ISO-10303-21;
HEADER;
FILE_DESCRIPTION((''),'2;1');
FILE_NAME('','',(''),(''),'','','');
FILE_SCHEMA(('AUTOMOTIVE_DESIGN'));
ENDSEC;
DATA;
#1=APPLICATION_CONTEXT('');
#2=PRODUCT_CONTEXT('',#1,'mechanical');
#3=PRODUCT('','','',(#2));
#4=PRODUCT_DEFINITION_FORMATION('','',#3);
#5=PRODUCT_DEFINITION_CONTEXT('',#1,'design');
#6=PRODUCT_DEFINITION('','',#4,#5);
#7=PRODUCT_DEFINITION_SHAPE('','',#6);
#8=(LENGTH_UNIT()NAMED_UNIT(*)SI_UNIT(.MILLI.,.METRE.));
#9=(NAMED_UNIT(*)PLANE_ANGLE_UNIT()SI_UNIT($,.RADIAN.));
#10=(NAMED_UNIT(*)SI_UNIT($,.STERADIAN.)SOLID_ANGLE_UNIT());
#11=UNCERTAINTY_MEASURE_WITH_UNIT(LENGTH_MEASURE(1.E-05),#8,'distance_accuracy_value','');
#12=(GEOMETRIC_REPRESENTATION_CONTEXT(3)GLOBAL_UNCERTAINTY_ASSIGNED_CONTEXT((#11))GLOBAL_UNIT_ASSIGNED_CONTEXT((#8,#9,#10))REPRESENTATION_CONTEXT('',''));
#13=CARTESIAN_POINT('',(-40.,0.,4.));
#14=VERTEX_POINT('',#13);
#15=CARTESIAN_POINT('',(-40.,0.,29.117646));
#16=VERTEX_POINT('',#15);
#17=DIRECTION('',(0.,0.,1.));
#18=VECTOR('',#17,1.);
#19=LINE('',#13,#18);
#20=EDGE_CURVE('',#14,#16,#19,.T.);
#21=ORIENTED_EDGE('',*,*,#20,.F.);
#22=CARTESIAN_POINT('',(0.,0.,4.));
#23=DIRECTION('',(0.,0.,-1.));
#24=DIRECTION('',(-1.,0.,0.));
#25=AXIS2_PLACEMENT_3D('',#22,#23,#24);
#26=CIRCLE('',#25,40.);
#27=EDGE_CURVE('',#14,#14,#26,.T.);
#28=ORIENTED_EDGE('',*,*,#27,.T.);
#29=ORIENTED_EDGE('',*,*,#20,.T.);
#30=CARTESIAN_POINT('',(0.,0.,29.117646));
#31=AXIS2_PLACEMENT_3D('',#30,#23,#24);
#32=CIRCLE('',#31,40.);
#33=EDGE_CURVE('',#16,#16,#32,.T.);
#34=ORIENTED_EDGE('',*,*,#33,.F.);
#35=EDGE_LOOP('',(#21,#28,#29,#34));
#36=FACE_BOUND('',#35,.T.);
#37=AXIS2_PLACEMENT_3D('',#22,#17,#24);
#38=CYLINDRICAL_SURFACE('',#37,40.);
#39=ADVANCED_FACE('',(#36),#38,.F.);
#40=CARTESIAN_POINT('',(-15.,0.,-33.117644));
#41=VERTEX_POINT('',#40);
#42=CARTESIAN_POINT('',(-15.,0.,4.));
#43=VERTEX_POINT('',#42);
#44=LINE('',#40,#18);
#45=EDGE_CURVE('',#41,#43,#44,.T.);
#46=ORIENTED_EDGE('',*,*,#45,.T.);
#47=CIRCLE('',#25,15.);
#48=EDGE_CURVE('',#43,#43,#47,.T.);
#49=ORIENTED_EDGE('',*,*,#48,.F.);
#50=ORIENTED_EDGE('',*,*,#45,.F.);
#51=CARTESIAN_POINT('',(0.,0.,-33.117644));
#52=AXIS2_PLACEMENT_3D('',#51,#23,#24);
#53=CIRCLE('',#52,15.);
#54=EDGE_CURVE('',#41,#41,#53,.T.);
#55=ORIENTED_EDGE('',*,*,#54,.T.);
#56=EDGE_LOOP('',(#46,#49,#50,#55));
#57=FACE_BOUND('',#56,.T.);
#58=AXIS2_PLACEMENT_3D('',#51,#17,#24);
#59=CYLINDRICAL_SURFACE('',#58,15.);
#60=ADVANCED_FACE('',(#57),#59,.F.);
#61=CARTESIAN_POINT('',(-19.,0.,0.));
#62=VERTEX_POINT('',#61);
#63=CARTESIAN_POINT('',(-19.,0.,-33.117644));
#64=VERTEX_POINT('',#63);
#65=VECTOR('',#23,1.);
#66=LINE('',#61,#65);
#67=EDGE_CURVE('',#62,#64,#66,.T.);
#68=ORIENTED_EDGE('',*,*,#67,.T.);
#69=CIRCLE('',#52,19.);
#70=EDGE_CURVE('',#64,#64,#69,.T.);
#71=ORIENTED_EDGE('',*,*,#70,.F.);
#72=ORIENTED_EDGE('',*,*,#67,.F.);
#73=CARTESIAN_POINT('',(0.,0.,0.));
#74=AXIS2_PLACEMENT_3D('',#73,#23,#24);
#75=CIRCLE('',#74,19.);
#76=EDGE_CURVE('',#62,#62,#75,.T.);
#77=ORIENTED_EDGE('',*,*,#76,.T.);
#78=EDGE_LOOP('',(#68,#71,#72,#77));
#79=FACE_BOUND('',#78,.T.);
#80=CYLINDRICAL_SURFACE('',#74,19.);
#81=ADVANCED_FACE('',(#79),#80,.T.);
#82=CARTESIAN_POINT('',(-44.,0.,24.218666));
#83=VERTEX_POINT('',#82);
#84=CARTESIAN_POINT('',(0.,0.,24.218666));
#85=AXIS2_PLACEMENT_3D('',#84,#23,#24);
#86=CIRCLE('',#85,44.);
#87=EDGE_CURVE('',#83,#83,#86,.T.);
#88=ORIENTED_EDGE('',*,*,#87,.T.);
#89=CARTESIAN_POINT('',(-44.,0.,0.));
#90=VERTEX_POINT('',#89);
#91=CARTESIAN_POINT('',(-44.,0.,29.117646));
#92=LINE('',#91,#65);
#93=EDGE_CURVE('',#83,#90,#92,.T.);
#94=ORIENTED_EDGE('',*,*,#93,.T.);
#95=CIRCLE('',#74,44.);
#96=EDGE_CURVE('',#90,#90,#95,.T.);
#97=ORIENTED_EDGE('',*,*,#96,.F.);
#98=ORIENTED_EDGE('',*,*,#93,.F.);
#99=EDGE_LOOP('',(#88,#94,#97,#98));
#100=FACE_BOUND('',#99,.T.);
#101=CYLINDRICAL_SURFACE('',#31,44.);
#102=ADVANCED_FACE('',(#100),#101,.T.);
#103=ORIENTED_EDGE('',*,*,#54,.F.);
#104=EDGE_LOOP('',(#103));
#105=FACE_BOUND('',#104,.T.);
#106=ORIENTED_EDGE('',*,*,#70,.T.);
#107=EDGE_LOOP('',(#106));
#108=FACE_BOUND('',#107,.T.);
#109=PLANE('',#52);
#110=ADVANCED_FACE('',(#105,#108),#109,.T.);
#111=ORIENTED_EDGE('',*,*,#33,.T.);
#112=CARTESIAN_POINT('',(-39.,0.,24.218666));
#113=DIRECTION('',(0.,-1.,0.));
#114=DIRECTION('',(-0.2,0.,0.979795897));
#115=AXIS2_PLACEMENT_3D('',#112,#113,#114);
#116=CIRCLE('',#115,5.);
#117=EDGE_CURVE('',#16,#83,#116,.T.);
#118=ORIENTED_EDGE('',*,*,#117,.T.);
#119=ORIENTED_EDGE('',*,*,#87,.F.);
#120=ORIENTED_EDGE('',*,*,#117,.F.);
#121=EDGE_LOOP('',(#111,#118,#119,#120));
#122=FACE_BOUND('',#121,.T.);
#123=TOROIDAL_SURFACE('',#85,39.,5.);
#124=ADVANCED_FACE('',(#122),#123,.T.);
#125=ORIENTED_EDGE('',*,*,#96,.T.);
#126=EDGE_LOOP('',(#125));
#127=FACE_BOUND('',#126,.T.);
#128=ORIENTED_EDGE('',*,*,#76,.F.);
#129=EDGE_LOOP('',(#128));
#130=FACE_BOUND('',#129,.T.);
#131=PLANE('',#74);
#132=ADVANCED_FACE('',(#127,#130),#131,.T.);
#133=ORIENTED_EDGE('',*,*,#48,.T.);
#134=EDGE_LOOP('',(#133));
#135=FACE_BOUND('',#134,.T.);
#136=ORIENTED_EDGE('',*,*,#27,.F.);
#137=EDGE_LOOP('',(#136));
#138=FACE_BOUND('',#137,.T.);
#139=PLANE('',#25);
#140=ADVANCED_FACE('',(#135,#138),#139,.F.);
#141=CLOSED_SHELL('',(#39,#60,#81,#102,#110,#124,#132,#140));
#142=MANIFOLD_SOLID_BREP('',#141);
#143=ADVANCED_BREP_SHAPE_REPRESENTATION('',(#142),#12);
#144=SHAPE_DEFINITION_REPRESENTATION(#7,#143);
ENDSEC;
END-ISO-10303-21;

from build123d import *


# Not quite as in the source:
# - a fillet or chamfer that OpenCascade refuses, or shapes differently, is made with other operations: its cross-section is extruded or revolved along the edge and cut away or added


with BuildPart() as f1:
    # F0 (on Front) → F1 (revolve)
    with BuildSketch(Plane.XZ):
        Polygon((-40, 29.117645719), (-44, 29.117645719), (-44, 0), (-19, 0), (-19, -33.1176439325), (-15, -33.1176439325), (-15, 4), (-40, 4), align=None)
    revolve(axis=Axis((0, 0, -0.9199753404), (0, 0, -1)))

    # F2: fillet of radius 5 on 1 edges, made by hand

    # F2_s1 → F2_t2 (revolve, cut)
    with BuildSketch(Plane.XZ):
        with BuildLine():
            ThreePointArc((-40, 29.117645719), (-42.8729833462, 27.3809438936), (-44, 24.2186662334))
            Line((-44, 24.2186662334), (-44, 29.117645719))
            Line((-44, 29.117645719), (-40, 29.117645719))
        make_face()
    revolve(axis=Axis((0, 0, 29.117645719), (0, 0, -1)), mode=Mode.SUBTRACT)


solid = f1.part
